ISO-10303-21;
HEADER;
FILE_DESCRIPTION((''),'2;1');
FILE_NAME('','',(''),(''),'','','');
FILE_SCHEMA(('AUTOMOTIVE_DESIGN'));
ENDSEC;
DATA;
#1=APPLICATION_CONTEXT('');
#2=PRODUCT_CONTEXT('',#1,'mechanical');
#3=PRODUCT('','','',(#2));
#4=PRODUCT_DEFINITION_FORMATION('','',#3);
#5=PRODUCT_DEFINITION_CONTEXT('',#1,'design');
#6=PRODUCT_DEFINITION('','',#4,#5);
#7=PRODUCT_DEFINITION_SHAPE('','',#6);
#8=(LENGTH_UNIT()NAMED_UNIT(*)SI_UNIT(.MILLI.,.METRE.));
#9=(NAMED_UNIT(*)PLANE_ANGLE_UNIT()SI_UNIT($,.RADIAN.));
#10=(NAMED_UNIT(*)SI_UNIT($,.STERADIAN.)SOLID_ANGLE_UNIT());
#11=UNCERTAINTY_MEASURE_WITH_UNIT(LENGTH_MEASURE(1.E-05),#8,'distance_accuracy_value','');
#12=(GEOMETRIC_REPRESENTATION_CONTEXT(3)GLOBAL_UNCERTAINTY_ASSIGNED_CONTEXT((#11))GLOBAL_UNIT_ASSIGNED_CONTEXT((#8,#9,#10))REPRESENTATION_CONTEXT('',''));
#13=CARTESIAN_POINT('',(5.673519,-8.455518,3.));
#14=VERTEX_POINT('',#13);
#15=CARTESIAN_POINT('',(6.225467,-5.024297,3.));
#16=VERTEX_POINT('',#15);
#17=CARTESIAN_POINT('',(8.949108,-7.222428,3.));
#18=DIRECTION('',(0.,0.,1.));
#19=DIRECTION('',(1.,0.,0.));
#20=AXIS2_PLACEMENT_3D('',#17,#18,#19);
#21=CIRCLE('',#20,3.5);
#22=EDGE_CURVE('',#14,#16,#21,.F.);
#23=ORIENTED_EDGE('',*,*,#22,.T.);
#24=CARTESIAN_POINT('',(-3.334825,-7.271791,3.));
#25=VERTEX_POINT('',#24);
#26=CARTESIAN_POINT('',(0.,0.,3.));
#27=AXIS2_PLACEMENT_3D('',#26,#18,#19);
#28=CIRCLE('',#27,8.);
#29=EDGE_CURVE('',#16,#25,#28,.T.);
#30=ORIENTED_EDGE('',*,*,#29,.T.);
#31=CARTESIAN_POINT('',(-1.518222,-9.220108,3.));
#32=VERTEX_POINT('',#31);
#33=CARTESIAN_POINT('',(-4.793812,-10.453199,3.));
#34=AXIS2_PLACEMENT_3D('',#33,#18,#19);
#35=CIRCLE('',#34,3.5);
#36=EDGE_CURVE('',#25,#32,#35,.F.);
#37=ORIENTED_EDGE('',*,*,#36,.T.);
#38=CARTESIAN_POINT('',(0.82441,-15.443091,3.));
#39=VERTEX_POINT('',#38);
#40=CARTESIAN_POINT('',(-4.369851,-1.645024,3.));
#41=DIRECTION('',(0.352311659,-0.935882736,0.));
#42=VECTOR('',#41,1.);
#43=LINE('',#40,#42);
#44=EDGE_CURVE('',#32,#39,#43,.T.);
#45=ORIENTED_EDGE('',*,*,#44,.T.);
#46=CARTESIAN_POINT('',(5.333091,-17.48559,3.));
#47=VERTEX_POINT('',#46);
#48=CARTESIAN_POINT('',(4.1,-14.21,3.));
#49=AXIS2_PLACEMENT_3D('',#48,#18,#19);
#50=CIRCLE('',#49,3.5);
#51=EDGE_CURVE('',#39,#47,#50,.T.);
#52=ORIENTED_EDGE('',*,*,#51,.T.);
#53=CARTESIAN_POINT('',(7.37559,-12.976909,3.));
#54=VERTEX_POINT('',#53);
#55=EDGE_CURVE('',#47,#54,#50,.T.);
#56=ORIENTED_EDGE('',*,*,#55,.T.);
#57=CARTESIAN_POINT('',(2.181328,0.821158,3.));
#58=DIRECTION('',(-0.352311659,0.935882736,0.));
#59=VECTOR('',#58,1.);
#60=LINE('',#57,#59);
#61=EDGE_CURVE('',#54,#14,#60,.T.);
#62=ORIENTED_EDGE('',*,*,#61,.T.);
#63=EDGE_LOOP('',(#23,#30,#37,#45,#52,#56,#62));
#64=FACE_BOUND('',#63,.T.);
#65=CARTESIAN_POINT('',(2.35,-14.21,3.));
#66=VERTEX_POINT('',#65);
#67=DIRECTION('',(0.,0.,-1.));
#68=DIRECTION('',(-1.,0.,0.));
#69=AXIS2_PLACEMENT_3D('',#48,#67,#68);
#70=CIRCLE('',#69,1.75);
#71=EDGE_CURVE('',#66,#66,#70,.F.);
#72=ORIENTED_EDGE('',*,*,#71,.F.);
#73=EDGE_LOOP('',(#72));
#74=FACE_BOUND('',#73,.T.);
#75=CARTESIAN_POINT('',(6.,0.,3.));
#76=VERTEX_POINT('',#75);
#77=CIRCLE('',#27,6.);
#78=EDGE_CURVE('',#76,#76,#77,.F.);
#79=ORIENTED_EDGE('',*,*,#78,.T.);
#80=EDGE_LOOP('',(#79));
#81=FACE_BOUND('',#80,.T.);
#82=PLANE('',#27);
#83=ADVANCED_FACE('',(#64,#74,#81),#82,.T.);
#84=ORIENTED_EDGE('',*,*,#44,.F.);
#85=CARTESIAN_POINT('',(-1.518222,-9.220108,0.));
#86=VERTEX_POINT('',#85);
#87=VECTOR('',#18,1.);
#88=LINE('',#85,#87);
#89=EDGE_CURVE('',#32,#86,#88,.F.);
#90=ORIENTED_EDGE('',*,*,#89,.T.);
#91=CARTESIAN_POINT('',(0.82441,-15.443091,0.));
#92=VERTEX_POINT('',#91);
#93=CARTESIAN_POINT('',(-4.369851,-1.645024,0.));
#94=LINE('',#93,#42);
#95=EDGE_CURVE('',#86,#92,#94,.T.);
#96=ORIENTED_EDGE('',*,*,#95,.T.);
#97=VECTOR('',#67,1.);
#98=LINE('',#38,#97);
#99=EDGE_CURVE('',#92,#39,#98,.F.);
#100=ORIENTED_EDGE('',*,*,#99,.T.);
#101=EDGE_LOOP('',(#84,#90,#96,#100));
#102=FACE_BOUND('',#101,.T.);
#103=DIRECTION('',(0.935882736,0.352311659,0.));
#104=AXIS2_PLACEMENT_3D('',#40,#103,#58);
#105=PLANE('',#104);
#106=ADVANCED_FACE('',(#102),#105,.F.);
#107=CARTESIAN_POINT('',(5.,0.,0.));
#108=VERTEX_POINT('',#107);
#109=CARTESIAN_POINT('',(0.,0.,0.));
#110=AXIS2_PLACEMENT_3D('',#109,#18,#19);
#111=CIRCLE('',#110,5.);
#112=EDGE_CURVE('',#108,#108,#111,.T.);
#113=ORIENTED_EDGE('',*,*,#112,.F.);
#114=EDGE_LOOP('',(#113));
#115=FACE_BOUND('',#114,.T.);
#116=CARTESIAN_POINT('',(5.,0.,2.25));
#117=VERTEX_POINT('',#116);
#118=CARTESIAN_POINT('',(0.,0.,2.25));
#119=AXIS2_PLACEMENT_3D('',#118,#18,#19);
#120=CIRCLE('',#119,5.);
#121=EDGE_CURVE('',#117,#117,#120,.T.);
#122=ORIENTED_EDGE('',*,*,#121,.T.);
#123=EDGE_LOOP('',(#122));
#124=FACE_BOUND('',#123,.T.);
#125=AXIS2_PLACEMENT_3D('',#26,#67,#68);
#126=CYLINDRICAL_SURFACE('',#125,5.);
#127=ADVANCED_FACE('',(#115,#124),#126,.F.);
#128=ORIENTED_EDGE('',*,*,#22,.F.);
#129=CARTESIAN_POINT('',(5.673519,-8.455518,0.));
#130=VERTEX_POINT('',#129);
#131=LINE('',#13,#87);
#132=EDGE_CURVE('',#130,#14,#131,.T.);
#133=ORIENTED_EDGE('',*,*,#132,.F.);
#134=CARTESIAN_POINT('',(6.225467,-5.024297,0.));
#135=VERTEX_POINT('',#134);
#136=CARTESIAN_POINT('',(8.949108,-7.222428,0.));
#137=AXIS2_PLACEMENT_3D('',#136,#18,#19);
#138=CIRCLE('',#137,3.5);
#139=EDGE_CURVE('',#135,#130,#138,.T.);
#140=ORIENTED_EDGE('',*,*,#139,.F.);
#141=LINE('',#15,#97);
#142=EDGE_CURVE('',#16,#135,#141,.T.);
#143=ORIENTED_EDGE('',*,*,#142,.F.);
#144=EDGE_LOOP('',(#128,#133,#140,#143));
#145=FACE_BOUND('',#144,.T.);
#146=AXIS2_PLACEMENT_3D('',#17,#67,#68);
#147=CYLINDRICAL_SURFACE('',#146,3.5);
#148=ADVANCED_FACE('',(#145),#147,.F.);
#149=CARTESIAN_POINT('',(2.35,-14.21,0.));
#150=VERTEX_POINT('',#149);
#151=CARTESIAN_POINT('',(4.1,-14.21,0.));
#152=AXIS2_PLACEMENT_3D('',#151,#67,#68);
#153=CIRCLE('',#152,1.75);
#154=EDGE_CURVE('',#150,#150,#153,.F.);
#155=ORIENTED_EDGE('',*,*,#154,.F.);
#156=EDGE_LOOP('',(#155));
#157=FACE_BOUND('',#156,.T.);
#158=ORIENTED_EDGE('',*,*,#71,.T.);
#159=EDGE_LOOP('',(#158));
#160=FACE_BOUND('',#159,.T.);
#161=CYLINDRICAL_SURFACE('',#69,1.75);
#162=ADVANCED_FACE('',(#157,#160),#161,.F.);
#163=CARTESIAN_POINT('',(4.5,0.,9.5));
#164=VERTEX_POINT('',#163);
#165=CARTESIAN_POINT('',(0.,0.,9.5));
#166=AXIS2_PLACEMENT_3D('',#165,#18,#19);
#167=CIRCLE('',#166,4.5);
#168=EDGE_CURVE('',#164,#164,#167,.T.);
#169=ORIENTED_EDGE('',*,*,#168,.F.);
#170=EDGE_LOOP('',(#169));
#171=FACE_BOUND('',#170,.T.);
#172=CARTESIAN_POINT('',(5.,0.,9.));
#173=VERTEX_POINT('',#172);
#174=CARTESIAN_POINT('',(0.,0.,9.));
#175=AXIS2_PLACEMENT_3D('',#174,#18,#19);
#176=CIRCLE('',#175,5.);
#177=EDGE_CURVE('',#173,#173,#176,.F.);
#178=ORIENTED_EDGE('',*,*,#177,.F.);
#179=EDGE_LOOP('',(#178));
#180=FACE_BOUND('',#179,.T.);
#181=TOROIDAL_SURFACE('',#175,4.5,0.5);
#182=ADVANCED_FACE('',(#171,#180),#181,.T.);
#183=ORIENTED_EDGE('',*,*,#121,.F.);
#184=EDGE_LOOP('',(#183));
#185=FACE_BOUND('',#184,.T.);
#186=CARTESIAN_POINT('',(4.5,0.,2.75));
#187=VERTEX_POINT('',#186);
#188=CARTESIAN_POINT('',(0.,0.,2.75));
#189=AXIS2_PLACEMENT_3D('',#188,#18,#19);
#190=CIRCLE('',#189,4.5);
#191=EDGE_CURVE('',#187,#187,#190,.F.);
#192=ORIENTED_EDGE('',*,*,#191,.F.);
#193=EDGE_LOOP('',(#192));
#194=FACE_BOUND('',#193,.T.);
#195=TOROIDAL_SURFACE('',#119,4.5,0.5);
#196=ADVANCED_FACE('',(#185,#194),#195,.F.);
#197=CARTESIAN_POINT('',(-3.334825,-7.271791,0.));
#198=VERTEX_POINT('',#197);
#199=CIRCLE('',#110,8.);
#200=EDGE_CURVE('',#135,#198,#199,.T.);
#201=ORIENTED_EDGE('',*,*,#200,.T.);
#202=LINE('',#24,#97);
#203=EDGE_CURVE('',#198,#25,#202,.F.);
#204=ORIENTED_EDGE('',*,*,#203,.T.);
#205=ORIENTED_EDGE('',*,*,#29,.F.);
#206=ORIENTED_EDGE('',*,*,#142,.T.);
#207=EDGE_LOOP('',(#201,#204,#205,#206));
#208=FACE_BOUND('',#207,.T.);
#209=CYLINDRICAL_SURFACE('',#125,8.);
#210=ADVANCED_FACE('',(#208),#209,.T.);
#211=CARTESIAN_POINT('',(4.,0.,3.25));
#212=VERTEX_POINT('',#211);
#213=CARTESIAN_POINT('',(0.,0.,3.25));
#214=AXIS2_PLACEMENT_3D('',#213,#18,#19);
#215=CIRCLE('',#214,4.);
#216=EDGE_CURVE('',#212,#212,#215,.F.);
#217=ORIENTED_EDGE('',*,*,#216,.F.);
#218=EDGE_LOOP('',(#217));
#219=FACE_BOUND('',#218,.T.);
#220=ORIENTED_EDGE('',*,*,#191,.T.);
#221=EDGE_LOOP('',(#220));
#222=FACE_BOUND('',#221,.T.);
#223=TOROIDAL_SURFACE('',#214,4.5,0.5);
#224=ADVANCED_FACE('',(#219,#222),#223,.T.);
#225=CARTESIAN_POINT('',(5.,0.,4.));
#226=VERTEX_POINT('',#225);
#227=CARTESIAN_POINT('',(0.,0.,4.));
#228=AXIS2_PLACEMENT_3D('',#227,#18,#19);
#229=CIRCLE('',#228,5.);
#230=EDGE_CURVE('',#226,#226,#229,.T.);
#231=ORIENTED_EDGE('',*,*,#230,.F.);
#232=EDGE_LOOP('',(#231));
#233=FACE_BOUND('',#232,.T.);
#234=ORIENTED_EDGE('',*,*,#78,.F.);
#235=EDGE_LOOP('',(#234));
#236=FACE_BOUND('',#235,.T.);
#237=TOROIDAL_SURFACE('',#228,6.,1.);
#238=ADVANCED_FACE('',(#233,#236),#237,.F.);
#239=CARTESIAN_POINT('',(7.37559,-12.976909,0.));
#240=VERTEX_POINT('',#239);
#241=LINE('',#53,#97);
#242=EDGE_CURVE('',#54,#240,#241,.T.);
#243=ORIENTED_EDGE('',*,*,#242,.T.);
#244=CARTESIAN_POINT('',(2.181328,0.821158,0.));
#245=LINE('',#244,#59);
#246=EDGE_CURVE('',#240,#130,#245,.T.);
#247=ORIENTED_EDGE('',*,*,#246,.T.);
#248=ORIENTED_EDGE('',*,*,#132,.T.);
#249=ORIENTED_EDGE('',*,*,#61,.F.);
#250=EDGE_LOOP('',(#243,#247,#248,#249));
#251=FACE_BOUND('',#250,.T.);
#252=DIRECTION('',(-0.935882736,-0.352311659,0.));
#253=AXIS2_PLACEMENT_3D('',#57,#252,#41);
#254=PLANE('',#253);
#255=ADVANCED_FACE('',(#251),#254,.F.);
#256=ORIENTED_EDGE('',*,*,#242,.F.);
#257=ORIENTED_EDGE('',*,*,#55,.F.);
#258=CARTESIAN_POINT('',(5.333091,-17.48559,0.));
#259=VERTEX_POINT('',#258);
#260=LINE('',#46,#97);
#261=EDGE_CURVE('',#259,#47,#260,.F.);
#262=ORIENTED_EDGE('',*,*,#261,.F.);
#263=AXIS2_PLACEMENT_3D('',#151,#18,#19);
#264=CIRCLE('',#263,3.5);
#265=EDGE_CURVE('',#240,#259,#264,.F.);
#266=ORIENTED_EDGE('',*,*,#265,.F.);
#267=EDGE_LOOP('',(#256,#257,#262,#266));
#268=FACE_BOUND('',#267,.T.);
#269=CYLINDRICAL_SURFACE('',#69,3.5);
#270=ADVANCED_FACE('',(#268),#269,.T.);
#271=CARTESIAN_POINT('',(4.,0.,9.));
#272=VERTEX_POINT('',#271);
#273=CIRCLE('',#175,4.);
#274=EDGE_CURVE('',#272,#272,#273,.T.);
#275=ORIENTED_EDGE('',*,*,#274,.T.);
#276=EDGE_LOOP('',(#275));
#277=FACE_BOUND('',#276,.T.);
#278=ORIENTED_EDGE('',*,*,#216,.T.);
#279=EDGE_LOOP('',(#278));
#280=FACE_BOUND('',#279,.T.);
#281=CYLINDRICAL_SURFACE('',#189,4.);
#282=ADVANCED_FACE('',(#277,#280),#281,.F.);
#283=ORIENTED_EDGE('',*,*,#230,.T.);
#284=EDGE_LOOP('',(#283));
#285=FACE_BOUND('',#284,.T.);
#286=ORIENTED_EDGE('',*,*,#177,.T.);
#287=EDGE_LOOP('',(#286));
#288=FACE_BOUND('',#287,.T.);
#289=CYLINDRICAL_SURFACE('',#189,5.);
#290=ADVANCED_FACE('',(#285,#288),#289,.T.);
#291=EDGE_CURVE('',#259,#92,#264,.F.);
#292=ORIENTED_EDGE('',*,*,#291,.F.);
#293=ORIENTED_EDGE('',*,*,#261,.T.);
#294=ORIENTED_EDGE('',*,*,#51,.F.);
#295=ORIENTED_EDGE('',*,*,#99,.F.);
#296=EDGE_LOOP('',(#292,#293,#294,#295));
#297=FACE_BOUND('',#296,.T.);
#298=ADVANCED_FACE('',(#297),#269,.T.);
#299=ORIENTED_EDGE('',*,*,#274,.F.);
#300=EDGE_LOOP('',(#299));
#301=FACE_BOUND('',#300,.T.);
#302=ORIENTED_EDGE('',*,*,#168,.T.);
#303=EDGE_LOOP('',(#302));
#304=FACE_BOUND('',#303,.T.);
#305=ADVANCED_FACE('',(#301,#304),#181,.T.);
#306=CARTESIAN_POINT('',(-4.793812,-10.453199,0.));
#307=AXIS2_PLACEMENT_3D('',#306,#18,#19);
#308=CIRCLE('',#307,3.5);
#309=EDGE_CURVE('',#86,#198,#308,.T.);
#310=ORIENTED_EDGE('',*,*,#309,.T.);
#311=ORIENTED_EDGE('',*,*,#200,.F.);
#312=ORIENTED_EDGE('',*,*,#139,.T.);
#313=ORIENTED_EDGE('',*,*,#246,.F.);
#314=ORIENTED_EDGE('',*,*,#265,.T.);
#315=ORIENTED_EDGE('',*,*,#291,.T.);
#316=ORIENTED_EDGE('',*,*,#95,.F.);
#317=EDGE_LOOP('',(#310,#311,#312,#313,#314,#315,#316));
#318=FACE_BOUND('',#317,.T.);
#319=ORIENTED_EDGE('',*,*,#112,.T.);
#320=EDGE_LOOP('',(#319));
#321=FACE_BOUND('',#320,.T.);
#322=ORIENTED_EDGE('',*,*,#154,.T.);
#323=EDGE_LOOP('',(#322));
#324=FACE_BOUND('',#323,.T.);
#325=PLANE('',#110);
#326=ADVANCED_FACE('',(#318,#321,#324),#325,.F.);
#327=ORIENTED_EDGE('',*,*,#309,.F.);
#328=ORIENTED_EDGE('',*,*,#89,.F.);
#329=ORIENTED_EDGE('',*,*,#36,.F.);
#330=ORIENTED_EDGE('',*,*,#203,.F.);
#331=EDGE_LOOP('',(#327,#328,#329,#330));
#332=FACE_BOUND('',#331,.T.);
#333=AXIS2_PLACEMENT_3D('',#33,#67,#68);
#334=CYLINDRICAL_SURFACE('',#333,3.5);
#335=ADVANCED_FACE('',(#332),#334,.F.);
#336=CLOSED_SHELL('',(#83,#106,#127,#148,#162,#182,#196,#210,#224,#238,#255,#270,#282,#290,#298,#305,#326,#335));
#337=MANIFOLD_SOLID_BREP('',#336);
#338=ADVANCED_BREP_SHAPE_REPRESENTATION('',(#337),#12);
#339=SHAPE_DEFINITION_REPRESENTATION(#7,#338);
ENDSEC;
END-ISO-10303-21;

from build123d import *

# Parameters (mm, degrees)
ESQUISSE1_R             = 8
ESQUISSE1_R_2           = 5
BOSS_EXTRU_1_DEPTH      = 3
BOSS_EXTRU_2_DEPTH      = 6.5
BOSS_EXTRU_2_DEPTH_BACK = 0.25
ESQUISSE2_R             = 5
ESQUISSE2_R_2           = 4
CONG_2_R                = 0.5
ESQUISSE4_R             = 1.75
BOSS_EXTRU_4_DEPTH      = 3
CONG_3_R                = 3.5
CONG_4_R                = 1


with BuildPart() as part:
    # Esquisse1 → Boss.-Extru.1 (new body)
    with BuildSketch(Plane.XY):
        Circle(ESQUISSE1_R)
        Circle(ESQUISSE1_R_2, mode=Mode.SUBTRACT)
    extrude(amount=BOSS_EXTRU_1_DEPTH)

    # Esquisse2 → Boss.-Extru.2 (add, two sides: drawn at the far end of the back side and taken through both)
    with BuildSketch(Plane.XY.offset(3).offset(-BOSS_EXTRU_2_DEPTH_BACK)):
        Circle(ESQUISSE2_R)
        Circle(ESQUISSE2_R_2, mode=Mode.SUBTRACT)
    extrude(amount=BOSS_EXTRU_2_DEPTH + BOSS_EXTRU_2_DEPTH_BACK)

    # Congé2
    cong_2_edges = [part.edges().sort_by_distance(p)[0] for p in [
        (-5, 0, 2.75),
        (-4, 0, 2.75),
        (-4, 0, 9.5),
        (-5, 0, 9.5),
    ]]
    fillet(cong_2_edges, radius=CONG_2_R - 0.0001)  # a hair under: the kernel refuses the full size

    # Esquisse4 → Boss.-Extru.4 (add)
    with BuildSketch(Plane.XY):
        with BuildLine():
            ThreePointArc((4.877548317, -6.341097887), (1.559913464, -7.846443142), (-2.081227097, -7.724538418))
            Line((-2.081227097, -7.724538418), (2.057501229, -18.71868038))
            Line((2.057501229, -18.71868038), (8.60868038, -16.252498771))
            Line((8.60868038, -16.252498771), (4.877548317, -6.341097887))
        make_face()
        with Locations(Location((4.1, -14.21, 0), (0, 0, 180))):
            Circle(ESQUISSE4_R, mode=Mode.SUBTRACT)
    extrude(amount=BOSS_EXTRU_4_DEPTH)

    # Congé3
    cong_3_edges = [part.edges().sort_by_distance(p)[0] for p in [
        (4.877548317, -6.341097887, 1.5),
        (-2.081227097, -7.724538418, 1.5),
        (2.057501229, -18.71868038, 1.5),
        (8.60868038, -16.252498771, 1.5),
    ]]
    fillet(cong_3_edges, radius=CONG_3_R - 0.0001)  # a hair under: the kernel refuses the full size

    # Congé4
    cong_4_edges = [part.edges().sort_by_distance(p)[0] for p in [
        (-5, 0, 3),
    ]]
    fillet(cong_4_edges, radius=CONG_4_R)


solid = part.part
